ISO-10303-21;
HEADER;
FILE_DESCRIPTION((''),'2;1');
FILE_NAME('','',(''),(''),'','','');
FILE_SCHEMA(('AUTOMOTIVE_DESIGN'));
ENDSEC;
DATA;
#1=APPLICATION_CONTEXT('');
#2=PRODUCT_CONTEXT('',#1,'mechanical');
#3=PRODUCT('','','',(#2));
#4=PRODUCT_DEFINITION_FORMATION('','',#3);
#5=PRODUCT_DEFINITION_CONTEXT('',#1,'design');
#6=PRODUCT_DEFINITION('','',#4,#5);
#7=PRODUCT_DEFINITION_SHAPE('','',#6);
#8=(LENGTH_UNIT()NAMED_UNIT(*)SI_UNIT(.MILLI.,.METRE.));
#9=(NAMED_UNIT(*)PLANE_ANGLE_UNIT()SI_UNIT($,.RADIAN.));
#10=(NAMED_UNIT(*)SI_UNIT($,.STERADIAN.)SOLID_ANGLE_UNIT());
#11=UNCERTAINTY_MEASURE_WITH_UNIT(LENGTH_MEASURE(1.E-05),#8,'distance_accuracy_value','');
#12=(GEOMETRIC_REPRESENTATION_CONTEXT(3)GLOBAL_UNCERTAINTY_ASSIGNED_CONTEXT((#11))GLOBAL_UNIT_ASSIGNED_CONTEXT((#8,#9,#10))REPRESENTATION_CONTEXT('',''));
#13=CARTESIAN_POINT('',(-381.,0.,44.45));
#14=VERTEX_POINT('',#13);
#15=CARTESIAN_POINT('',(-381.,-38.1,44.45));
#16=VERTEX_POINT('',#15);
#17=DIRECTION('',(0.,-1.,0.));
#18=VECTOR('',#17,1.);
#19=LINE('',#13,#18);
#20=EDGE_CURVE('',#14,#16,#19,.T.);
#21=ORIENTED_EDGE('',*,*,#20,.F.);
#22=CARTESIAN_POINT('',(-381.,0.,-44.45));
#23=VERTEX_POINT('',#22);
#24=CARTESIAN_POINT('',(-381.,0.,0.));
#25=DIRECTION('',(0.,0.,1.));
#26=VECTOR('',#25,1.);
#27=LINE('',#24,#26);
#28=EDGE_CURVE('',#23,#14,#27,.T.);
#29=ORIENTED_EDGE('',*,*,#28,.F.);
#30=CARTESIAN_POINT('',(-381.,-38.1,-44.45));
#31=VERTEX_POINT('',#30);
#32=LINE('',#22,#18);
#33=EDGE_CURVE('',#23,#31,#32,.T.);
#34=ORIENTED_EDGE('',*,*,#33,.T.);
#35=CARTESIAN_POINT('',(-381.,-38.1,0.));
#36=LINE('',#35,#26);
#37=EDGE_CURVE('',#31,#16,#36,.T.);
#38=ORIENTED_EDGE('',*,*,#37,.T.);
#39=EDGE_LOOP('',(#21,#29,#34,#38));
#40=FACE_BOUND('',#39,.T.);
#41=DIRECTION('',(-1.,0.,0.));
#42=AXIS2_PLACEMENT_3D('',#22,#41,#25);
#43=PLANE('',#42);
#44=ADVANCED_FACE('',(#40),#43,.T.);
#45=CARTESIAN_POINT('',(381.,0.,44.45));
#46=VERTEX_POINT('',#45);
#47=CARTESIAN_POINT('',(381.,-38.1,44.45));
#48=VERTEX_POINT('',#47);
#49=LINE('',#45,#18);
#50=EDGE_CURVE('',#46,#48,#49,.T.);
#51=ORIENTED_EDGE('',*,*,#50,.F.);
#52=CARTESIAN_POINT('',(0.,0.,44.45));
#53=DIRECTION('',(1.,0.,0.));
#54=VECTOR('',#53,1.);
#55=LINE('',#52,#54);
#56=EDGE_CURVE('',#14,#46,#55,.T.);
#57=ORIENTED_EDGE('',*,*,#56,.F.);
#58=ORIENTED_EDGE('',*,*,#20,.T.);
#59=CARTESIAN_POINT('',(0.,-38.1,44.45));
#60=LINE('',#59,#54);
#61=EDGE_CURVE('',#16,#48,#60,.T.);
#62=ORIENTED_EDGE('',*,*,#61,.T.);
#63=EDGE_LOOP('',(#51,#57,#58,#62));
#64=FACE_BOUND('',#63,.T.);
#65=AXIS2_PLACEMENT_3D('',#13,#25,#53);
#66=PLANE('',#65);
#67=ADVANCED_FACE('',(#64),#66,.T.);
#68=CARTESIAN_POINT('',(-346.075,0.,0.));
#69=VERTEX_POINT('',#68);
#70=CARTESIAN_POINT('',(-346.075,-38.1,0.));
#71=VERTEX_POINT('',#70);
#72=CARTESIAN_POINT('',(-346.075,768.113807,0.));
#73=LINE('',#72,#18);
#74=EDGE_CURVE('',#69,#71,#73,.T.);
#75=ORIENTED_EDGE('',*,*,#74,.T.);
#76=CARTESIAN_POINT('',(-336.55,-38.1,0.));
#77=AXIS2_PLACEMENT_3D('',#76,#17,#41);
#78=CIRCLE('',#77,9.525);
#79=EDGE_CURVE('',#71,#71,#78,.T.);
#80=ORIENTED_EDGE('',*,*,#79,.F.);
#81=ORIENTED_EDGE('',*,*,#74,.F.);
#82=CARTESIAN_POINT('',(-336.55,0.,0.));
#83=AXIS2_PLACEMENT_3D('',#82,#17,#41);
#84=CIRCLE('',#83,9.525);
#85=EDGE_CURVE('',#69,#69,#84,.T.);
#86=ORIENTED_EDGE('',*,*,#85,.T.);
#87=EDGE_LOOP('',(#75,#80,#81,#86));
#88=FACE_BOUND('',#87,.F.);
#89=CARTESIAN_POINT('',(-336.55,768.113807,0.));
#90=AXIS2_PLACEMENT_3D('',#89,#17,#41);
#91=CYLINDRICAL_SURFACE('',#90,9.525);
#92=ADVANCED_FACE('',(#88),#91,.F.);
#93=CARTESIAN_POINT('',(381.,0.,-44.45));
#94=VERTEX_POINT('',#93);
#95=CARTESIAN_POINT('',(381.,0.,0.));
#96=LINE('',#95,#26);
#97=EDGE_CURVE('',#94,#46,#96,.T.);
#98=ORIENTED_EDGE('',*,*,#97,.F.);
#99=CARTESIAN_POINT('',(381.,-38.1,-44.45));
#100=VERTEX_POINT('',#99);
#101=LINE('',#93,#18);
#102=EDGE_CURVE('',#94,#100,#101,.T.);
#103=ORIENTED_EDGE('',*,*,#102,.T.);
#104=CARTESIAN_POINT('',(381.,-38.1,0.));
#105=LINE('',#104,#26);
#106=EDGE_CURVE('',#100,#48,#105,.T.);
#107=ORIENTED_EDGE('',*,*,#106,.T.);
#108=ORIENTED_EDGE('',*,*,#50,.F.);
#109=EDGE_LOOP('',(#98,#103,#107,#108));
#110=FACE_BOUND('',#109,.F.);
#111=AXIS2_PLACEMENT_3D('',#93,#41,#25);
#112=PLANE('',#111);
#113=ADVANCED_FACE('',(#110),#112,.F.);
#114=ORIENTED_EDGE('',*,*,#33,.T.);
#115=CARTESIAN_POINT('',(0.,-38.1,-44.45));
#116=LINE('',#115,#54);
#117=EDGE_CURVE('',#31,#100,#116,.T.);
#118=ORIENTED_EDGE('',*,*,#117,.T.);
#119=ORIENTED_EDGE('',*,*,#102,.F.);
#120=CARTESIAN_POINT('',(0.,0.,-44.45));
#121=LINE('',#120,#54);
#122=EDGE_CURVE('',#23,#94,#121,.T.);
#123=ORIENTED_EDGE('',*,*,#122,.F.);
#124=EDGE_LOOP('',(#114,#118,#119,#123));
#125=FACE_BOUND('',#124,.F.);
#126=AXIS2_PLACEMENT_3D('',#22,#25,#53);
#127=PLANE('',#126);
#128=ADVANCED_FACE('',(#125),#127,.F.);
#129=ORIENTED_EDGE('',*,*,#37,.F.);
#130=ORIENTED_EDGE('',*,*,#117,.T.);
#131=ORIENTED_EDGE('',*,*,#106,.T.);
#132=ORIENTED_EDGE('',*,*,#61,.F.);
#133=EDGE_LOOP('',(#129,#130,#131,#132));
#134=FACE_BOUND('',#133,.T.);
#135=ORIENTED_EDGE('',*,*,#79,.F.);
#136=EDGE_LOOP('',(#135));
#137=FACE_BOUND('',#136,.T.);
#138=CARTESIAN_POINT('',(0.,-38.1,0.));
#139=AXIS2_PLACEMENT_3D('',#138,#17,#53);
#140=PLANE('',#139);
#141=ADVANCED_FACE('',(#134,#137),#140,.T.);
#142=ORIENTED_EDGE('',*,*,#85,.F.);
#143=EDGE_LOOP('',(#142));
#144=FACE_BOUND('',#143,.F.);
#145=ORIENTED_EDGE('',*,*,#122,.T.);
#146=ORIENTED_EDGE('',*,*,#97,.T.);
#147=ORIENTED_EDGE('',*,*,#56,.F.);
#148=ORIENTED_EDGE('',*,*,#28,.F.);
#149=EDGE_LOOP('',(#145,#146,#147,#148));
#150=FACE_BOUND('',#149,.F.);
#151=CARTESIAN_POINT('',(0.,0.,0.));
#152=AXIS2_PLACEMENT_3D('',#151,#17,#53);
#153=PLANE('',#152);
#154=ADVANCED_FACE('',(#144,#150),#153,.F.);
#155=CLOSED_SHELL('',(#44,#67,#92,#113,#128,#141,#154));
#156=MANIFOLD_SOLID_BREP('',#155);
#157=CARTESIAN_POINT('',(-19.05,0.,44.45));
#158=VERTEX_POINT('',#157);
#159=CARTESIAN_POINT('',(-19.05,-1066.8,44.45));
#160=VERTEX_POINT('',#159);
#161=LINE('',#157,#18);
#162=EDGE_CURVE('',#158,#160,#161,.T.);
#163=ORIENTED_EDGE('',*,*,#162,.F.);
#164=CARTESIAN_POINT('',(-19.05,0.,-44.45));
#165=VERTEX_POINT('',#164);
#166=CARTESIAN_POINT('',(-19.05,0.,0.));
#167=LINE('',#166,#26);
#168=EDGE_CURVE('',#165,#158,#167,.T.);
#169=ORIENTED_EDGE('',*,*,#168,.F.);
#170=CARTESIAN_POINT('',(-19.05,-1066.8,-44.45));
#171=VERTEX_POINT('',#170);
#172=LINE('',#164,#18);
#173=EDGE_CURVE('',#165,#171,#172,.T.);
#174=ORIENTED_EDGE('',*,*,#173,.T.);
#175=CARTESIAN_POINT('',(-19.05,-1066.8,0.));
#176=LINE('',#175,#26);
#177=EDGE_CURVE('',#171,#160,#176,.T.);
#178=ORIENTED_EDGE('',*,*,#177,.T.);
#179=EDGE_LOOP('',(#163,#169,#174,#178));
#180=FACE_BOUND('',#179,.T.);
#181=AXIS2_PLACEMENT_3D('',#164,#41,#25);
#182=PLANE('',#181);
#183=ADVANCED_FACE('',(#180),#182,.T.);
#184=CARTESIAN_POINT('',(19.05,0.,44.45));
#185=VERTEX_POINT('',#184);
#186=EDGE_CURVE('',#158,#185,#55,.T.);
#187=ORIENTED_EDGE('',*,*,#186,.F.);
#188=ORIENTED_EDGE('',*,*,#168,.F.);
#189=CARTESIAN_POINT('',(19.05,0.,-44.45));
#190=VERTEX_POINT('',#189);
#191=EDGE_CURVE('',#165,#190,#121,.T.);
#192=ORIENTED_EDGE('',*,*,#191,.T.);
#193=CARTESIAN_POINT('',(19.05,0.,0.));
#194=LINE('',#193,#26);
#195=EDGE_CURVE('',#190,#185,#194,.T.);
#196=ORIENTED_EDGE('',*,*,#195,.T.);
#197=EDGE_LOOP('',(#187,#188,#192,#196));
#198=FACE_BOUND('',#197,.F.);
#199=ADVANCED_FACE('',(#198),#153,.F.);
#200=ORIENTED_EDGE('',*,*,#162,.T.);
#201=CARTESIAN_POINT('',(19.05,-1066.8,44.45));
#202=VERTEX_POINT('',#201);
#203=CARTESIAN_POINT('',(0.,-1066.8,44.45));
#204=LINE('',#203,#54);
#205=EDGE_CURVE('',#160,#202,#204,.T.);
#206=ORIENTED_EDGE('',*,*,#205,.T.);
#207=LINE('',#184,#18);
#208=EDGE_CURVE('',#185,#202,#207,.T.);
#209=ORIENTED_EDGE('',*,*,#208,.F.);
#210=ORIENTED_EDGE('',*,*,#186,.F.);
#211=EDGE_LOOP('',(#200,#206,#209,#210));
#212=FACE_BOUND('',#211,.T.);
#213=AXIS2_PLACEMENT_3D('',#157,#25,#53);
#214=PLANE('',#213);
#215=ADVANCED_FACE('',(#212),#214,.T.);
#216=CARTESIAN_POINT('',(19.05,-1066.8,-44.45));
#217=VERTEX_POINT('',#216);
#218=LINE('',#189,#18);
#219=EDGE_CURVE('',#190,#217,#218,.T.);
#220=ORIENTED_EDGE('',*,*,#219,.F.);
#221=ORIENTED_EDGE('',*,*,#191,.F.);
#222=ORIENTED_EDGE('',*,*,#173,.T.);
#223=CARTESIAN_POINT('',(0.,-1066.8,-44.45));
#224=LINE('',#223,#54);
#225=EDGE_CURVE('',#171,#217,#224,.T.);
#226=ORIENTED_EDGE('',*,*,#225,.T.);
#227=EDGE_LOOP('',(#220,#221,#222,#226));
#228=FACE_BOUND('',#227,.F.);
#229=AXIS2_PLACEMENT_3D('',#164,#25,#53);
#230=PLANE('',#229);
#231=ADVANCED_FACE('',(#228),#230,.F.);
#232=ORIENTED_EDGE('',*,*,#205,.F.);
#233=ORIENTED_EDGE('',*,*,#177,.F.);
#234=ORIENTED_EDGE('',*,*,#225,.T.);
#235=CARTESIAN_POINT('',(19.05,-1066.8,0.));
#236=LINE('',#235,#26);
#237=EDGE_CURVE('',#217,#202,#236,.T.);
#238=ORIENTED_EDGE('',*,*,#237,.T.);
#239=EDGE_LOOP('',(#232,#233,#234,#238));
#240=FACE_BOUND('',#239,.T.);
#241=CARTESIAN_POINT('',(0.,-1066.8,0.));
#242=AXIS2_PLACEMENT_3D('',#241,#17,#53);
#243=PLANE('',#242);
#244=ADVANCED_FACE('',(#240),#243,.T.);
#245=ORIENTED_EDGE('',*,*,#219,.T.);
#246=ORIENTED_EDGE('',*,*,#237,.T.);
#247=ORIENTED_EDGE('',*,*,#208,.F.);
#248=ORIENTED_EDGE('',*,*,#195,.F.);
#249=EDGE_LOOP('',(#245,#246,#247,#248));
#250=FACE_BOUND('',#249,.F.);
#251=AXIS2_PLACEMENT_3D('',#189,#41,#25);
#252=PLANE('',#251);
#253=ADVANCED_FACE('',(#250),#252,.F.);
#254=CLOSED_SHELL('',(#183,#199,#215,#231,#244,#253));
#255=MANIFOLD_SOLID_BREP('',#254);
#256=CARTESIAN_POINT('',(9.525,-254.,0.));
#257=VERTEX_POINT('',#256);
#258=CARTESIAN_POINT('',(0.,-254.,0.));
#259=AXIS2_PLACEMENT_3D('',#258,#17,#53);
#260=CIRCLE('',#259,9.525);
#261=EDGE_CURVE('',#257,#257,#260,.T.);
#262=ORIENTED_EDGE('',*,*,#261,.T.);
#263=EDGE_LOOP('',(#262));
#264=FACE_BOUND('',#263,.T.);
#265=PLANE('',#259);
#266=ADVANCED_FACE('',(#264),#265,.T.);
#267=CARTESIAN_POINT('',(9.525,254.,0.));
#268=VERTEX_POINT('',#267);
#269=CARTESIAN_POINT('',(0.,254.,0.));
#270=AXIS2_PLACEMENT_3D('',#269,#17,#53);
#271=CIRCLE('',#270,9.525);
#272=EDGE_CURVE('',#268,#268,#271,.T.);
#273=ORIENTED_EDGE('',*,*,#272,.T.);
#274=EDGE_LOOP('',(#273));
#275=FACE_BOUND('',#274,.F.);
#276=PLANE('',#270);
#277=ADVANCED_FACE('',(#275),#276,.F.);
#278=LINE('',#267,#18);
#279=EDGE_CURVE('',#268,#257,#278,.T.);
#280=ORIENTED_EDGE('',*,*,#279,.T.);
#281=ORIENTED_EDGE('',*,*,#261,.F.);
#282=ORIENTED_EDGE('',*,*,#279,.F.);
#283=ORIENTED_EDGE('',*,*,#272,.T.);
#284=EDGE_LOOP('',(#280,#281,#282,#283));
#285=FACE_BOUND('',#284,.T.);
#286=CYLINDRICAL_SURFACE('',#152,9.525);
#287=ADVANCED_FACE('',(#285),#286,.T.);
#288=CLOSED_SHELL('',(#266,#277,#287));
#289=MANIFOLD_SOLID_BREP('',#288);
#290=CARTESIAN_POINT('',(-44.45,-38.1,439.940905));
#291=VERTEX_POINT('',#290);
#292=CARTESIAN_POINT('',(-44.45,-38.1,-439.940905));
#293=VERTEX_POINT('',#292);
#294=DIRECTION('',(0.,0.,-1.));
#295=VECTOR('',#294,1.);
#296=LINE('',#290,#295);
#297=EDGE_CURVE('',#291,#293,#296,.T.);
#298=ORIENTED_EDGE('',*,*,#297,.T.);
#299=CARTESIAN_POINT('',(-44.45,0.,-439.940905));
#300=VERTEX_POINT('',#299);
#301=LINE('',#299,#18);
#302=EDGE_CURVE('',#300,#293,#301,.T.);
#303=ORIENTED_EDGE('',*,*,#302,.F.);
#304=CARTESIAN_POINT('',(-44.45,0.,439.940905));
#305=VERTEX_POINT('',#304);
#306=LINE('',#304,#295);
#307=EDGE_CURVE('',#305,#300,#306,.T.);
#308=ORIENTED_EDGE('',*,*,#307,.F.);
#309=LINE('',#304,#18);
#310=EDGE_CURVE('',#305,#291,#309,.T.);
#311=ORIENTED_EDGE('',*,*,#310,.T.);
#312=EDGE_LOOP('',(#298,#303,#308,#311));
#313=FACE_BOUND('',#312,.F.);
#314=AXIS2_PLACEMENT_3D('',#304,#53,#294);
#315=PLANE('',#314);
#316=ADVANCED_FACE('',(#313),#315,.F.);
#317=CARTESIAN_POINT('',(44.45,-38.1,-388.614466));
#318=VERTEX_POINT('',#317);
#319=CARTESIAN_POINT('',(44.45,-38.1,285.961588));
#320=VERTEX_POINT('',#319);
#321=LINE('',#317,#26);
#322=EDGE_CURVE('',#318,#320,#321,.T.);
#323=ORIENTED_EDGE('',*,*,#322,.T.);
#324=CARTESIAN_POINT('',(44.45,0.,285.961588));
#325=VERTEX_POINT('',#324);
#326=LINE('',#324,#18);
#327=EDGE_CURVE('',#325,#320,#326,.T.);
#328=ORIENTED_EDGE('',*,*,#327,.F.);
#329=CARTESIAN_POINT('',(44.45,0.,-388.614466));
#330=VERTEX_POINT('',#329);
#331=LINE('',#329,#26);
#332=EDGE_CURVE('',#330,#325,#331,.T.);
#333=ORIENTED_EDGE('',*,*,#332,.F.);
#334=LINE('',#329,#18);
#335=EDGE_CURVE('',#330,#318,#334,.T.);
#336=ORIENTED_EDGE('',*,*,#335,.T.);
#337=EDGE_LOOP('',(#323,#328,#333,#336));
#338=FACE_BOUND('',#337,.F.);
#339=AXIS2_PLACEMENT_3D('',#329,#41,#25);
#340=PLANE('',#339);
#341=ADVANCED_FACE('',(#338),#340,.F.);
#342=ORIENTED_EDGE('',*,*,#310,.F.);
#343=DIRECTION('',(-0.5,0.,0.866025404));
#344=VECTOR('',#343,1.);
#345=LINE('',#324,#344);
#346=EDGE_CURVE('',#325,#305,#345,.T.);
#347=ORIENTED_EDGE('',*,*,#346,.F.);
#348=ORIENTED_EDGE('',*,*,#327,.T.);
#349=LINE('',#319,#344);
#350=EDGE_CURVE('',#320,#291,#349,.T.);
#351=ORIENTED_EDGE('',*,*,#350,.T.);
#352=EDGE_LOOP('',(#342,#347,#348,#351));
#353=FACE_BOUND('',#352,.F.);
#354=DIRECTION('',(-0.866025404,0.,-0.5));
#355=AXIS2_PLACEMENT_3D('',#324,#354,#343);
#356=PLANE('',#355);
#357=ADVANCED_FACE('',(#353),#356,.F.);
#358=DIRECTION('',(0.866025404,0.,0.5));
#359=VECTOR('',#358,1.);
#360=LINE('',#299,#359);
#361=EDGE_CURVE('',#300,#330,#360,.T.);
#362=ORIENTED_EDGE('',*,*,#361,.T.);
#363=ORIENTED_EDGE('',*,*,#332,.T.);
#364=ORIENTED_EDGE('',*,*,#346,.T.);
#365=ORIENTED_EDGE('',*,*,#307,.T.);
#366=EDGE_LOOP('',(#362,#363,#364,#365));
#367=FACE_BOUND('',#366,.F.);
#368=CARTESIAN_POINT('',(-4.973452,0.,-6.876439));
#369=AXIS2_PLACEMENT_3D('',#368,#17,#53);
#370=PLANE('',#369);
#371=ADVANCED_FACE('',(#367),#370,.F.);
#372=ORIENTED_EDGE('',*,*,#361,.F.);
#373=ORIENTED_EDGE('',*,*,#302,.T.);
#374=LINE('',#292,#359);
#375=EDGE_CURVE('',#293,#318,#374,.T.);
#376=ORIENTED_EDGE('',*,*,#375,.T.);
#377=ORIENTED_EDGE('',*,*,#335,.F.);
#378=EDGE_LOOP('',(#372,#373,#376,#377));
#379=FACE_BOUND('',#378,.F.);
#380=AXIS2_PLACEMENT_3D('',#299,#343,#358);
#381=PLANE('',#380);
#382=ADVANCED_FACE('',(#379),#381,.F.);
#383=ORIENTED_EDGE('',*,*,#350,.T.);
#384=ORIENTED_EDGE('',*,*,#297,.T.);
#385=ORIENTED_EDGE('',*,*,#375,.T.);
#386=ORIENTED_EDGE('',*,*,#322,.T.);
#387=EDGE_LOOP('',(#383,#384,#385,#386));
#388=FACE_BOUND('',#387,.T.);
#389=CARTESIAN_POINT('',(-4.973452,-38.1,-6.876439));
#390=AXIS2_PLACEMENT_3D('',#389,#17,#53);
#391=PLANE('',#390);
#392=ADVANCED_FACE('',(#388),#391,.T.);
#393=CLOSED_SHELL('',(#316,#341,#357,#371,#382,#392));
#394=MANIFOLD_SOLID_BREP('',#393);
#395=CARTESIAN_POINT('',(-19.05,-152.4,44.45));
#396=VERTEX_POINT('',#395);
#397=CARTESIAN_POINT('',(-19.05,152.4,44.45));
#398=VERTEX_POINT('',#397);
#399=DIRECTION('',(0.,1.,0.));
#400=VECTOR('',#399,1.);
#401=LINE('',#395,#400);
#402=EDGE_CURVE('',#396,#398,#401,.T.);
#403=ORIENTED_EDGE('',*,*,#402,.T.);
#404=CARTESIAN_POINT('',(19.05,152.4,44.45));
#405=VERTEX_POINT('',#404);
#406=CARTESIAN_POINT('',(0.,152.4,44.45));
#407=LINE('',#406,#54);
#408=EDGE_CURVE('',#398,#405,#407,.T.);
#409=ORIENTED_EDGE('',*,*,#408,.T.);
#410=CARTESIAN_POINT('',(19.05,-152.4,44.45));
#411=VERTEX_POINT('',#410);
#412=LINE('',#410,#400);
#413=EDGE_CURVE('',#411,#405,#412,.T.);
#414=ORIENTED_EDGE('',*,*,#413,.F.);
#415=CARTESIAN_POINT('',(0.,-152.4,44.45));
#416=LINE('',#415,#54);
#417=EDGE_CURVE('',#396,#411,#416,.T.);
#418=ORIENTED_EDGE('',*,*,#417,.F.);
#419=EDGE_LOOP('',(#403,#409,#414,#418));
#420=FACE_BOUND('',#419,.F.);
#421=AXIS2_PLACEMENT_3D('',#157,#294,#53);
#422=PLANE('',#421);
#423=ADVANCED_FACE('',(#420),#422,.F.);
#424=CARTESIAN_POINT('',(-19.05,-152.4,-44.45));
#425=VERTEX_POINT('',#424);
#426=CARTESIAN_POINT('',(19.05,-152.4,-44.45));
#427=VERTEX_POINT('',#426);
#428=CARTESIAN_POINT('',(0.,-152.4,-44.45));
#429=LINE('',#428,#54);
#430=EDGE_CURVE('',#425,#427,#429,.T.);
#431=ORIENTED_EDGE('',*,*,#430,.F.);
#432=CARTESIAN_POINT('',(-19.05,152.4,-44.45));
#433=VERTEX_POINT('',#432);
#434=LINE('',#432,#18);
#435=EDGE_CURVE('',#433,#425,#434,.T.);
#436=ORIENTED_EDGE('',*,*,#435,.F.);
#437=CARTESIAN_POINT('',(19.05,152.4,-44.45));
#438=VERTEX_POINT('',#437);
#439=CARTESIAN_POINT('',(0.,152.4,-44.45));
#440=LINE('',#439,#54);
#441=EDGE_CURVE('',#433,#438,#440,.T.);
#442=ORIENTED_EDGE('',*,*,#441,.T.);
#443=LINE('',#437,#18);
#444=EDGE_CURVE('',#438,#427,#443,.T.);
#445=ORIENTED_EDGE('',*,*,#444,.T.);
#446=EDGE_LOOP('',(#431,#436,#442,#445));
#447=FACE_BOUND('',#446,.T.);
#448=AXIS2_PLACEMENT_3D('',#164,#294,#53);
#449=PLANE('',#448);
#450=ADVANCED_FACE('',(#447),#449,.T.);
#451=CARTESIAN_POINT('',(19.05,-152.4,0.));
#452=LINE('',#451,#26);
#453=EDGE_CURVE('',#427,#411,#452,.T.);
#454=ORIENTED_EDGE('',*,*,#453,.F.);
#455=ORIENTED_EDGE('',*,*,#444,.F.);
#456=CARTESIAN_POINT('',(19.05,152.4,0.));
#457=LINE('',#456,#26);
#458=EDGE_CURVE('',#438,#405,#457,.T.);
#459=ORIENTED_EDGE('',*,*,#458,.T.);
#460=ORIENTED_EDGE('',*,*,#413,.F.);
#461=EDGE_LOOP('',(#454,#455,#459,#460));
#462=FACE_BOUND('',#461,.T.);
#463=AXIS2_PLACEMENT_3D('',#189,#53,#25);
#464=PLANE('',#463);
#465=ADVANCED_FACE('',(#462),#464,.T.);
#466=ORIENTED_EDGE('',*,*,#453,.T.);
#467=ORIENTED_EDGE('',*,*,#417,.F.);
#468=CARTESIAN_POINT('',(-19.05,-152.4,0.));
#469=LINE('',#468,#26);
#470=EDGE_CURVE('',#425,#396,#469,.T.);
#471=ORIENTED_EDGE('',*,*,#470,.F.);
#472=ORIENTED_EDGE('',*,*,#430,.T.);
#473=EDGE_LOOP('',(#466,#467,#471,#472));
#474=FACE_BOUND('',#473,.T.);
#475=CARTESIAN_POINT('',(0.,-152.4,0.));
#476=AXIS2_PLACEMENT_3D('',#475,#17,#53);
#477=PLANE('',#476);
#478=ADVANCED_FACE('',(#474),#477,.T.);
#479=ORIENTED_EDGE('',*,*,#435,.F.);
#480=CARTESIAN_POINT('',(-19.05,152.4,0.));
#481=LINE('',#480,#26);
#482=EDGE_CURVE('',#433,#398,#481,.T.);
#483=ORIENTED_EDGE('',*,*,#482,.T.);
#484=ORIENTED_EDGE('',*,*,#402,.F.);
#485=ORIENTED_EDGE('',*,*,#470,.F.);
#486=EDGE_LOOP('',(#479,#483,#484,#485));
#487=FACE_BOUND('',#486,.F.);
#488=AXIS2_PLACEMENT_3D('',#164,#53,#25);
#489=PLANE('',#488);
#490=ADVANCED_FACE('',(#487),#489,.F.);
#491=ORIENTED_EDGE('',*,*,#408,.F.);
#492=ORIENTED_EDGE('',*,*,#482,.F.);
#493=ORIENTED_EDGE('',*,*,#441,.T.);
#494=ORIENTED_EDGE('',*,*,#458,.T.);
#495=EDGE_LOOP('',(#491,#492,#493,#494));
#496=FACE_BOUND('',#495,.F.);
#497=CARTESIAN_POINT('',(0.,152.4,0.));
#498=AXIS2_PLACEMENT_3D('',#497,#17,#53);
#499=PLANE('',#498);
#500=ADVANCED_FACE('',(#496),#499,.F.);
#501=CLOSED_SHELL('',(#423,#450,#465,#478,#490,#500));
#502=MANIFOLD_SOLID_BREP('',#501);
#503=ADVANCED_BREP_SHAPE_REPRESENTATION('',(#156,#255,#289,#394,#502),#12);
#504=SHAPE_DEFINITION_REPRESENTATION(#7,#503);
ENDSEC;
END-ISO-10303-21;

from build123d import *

# Parameters (mm, degrees)
F2_W      = 38.1
F2_H      = 88.9
F3_DEPTH  = 152.4
F5_DEPTH  = 38.1
F6_W      = 762
F6_H      = 88.9
F7_DEPTH  = 38.1
F8_D      = 19.05
F9_R      = 9.525
F10_DEPTH = 254
F11_DEPTH = 1066.8


# Not quite as in the source:
# - a variable given as a bare number and used for a length is read in inches; the dataset says mm whatever the document's units were


with BuildPart() as f3:
    # F2 (on Front) → F3 (new body, symmetric)
    with BuildSketch(Plane.XZ):
        Rectangle(F2_W, F2_H)
    extrude(amount=F3_DEPTH, both=True)


with BuildPart() as f5:
    # F4 (on Front) → F5 (new body)
    with BuildSketch(Plane.XZ):
        Polygon((-44.45, 439.9409051225), (-44.45, -439.9409051225), (44.45, -388.6144661915), (44.45, 285.9615883296), align=None)
    extrude(amount=F5_DEPTH)


with BuildPart() as f7:
    # F6 (on Front) → F7 (new body)
    with BuildSketch(Plane.XZ):
        Rectangle(F6_W, F6_H)
    extrude(amount=F7_DEPTH)

    # F8 (through all)
    with Locations(Plane(origin=(0, 0, 0), x_dir=(1, 0, 0), z_dir=(0, 1, 0))):
        with Locations((-336.55, 0)):
            Hole(F8_D / 2)


with BuildPart() as f10:
    # F9 (on Front) → F10 (new body, symmetric)
    with BuildSketch(Plane.XZ):
        Circle(F9_R)
    extrude(amount=F10_DEPTH, both=True)


with BuildPart() as f11:
    # F2 (on Front) → F11 (new body)
    with BuildSketch(Plane.XZ):
        Rectangle(F2_W, F2_H)
    extrude(amount=F11_DEPTH)


solid = Compound([f3.part, f5.part, f7.part, f10.part, f11.part])
